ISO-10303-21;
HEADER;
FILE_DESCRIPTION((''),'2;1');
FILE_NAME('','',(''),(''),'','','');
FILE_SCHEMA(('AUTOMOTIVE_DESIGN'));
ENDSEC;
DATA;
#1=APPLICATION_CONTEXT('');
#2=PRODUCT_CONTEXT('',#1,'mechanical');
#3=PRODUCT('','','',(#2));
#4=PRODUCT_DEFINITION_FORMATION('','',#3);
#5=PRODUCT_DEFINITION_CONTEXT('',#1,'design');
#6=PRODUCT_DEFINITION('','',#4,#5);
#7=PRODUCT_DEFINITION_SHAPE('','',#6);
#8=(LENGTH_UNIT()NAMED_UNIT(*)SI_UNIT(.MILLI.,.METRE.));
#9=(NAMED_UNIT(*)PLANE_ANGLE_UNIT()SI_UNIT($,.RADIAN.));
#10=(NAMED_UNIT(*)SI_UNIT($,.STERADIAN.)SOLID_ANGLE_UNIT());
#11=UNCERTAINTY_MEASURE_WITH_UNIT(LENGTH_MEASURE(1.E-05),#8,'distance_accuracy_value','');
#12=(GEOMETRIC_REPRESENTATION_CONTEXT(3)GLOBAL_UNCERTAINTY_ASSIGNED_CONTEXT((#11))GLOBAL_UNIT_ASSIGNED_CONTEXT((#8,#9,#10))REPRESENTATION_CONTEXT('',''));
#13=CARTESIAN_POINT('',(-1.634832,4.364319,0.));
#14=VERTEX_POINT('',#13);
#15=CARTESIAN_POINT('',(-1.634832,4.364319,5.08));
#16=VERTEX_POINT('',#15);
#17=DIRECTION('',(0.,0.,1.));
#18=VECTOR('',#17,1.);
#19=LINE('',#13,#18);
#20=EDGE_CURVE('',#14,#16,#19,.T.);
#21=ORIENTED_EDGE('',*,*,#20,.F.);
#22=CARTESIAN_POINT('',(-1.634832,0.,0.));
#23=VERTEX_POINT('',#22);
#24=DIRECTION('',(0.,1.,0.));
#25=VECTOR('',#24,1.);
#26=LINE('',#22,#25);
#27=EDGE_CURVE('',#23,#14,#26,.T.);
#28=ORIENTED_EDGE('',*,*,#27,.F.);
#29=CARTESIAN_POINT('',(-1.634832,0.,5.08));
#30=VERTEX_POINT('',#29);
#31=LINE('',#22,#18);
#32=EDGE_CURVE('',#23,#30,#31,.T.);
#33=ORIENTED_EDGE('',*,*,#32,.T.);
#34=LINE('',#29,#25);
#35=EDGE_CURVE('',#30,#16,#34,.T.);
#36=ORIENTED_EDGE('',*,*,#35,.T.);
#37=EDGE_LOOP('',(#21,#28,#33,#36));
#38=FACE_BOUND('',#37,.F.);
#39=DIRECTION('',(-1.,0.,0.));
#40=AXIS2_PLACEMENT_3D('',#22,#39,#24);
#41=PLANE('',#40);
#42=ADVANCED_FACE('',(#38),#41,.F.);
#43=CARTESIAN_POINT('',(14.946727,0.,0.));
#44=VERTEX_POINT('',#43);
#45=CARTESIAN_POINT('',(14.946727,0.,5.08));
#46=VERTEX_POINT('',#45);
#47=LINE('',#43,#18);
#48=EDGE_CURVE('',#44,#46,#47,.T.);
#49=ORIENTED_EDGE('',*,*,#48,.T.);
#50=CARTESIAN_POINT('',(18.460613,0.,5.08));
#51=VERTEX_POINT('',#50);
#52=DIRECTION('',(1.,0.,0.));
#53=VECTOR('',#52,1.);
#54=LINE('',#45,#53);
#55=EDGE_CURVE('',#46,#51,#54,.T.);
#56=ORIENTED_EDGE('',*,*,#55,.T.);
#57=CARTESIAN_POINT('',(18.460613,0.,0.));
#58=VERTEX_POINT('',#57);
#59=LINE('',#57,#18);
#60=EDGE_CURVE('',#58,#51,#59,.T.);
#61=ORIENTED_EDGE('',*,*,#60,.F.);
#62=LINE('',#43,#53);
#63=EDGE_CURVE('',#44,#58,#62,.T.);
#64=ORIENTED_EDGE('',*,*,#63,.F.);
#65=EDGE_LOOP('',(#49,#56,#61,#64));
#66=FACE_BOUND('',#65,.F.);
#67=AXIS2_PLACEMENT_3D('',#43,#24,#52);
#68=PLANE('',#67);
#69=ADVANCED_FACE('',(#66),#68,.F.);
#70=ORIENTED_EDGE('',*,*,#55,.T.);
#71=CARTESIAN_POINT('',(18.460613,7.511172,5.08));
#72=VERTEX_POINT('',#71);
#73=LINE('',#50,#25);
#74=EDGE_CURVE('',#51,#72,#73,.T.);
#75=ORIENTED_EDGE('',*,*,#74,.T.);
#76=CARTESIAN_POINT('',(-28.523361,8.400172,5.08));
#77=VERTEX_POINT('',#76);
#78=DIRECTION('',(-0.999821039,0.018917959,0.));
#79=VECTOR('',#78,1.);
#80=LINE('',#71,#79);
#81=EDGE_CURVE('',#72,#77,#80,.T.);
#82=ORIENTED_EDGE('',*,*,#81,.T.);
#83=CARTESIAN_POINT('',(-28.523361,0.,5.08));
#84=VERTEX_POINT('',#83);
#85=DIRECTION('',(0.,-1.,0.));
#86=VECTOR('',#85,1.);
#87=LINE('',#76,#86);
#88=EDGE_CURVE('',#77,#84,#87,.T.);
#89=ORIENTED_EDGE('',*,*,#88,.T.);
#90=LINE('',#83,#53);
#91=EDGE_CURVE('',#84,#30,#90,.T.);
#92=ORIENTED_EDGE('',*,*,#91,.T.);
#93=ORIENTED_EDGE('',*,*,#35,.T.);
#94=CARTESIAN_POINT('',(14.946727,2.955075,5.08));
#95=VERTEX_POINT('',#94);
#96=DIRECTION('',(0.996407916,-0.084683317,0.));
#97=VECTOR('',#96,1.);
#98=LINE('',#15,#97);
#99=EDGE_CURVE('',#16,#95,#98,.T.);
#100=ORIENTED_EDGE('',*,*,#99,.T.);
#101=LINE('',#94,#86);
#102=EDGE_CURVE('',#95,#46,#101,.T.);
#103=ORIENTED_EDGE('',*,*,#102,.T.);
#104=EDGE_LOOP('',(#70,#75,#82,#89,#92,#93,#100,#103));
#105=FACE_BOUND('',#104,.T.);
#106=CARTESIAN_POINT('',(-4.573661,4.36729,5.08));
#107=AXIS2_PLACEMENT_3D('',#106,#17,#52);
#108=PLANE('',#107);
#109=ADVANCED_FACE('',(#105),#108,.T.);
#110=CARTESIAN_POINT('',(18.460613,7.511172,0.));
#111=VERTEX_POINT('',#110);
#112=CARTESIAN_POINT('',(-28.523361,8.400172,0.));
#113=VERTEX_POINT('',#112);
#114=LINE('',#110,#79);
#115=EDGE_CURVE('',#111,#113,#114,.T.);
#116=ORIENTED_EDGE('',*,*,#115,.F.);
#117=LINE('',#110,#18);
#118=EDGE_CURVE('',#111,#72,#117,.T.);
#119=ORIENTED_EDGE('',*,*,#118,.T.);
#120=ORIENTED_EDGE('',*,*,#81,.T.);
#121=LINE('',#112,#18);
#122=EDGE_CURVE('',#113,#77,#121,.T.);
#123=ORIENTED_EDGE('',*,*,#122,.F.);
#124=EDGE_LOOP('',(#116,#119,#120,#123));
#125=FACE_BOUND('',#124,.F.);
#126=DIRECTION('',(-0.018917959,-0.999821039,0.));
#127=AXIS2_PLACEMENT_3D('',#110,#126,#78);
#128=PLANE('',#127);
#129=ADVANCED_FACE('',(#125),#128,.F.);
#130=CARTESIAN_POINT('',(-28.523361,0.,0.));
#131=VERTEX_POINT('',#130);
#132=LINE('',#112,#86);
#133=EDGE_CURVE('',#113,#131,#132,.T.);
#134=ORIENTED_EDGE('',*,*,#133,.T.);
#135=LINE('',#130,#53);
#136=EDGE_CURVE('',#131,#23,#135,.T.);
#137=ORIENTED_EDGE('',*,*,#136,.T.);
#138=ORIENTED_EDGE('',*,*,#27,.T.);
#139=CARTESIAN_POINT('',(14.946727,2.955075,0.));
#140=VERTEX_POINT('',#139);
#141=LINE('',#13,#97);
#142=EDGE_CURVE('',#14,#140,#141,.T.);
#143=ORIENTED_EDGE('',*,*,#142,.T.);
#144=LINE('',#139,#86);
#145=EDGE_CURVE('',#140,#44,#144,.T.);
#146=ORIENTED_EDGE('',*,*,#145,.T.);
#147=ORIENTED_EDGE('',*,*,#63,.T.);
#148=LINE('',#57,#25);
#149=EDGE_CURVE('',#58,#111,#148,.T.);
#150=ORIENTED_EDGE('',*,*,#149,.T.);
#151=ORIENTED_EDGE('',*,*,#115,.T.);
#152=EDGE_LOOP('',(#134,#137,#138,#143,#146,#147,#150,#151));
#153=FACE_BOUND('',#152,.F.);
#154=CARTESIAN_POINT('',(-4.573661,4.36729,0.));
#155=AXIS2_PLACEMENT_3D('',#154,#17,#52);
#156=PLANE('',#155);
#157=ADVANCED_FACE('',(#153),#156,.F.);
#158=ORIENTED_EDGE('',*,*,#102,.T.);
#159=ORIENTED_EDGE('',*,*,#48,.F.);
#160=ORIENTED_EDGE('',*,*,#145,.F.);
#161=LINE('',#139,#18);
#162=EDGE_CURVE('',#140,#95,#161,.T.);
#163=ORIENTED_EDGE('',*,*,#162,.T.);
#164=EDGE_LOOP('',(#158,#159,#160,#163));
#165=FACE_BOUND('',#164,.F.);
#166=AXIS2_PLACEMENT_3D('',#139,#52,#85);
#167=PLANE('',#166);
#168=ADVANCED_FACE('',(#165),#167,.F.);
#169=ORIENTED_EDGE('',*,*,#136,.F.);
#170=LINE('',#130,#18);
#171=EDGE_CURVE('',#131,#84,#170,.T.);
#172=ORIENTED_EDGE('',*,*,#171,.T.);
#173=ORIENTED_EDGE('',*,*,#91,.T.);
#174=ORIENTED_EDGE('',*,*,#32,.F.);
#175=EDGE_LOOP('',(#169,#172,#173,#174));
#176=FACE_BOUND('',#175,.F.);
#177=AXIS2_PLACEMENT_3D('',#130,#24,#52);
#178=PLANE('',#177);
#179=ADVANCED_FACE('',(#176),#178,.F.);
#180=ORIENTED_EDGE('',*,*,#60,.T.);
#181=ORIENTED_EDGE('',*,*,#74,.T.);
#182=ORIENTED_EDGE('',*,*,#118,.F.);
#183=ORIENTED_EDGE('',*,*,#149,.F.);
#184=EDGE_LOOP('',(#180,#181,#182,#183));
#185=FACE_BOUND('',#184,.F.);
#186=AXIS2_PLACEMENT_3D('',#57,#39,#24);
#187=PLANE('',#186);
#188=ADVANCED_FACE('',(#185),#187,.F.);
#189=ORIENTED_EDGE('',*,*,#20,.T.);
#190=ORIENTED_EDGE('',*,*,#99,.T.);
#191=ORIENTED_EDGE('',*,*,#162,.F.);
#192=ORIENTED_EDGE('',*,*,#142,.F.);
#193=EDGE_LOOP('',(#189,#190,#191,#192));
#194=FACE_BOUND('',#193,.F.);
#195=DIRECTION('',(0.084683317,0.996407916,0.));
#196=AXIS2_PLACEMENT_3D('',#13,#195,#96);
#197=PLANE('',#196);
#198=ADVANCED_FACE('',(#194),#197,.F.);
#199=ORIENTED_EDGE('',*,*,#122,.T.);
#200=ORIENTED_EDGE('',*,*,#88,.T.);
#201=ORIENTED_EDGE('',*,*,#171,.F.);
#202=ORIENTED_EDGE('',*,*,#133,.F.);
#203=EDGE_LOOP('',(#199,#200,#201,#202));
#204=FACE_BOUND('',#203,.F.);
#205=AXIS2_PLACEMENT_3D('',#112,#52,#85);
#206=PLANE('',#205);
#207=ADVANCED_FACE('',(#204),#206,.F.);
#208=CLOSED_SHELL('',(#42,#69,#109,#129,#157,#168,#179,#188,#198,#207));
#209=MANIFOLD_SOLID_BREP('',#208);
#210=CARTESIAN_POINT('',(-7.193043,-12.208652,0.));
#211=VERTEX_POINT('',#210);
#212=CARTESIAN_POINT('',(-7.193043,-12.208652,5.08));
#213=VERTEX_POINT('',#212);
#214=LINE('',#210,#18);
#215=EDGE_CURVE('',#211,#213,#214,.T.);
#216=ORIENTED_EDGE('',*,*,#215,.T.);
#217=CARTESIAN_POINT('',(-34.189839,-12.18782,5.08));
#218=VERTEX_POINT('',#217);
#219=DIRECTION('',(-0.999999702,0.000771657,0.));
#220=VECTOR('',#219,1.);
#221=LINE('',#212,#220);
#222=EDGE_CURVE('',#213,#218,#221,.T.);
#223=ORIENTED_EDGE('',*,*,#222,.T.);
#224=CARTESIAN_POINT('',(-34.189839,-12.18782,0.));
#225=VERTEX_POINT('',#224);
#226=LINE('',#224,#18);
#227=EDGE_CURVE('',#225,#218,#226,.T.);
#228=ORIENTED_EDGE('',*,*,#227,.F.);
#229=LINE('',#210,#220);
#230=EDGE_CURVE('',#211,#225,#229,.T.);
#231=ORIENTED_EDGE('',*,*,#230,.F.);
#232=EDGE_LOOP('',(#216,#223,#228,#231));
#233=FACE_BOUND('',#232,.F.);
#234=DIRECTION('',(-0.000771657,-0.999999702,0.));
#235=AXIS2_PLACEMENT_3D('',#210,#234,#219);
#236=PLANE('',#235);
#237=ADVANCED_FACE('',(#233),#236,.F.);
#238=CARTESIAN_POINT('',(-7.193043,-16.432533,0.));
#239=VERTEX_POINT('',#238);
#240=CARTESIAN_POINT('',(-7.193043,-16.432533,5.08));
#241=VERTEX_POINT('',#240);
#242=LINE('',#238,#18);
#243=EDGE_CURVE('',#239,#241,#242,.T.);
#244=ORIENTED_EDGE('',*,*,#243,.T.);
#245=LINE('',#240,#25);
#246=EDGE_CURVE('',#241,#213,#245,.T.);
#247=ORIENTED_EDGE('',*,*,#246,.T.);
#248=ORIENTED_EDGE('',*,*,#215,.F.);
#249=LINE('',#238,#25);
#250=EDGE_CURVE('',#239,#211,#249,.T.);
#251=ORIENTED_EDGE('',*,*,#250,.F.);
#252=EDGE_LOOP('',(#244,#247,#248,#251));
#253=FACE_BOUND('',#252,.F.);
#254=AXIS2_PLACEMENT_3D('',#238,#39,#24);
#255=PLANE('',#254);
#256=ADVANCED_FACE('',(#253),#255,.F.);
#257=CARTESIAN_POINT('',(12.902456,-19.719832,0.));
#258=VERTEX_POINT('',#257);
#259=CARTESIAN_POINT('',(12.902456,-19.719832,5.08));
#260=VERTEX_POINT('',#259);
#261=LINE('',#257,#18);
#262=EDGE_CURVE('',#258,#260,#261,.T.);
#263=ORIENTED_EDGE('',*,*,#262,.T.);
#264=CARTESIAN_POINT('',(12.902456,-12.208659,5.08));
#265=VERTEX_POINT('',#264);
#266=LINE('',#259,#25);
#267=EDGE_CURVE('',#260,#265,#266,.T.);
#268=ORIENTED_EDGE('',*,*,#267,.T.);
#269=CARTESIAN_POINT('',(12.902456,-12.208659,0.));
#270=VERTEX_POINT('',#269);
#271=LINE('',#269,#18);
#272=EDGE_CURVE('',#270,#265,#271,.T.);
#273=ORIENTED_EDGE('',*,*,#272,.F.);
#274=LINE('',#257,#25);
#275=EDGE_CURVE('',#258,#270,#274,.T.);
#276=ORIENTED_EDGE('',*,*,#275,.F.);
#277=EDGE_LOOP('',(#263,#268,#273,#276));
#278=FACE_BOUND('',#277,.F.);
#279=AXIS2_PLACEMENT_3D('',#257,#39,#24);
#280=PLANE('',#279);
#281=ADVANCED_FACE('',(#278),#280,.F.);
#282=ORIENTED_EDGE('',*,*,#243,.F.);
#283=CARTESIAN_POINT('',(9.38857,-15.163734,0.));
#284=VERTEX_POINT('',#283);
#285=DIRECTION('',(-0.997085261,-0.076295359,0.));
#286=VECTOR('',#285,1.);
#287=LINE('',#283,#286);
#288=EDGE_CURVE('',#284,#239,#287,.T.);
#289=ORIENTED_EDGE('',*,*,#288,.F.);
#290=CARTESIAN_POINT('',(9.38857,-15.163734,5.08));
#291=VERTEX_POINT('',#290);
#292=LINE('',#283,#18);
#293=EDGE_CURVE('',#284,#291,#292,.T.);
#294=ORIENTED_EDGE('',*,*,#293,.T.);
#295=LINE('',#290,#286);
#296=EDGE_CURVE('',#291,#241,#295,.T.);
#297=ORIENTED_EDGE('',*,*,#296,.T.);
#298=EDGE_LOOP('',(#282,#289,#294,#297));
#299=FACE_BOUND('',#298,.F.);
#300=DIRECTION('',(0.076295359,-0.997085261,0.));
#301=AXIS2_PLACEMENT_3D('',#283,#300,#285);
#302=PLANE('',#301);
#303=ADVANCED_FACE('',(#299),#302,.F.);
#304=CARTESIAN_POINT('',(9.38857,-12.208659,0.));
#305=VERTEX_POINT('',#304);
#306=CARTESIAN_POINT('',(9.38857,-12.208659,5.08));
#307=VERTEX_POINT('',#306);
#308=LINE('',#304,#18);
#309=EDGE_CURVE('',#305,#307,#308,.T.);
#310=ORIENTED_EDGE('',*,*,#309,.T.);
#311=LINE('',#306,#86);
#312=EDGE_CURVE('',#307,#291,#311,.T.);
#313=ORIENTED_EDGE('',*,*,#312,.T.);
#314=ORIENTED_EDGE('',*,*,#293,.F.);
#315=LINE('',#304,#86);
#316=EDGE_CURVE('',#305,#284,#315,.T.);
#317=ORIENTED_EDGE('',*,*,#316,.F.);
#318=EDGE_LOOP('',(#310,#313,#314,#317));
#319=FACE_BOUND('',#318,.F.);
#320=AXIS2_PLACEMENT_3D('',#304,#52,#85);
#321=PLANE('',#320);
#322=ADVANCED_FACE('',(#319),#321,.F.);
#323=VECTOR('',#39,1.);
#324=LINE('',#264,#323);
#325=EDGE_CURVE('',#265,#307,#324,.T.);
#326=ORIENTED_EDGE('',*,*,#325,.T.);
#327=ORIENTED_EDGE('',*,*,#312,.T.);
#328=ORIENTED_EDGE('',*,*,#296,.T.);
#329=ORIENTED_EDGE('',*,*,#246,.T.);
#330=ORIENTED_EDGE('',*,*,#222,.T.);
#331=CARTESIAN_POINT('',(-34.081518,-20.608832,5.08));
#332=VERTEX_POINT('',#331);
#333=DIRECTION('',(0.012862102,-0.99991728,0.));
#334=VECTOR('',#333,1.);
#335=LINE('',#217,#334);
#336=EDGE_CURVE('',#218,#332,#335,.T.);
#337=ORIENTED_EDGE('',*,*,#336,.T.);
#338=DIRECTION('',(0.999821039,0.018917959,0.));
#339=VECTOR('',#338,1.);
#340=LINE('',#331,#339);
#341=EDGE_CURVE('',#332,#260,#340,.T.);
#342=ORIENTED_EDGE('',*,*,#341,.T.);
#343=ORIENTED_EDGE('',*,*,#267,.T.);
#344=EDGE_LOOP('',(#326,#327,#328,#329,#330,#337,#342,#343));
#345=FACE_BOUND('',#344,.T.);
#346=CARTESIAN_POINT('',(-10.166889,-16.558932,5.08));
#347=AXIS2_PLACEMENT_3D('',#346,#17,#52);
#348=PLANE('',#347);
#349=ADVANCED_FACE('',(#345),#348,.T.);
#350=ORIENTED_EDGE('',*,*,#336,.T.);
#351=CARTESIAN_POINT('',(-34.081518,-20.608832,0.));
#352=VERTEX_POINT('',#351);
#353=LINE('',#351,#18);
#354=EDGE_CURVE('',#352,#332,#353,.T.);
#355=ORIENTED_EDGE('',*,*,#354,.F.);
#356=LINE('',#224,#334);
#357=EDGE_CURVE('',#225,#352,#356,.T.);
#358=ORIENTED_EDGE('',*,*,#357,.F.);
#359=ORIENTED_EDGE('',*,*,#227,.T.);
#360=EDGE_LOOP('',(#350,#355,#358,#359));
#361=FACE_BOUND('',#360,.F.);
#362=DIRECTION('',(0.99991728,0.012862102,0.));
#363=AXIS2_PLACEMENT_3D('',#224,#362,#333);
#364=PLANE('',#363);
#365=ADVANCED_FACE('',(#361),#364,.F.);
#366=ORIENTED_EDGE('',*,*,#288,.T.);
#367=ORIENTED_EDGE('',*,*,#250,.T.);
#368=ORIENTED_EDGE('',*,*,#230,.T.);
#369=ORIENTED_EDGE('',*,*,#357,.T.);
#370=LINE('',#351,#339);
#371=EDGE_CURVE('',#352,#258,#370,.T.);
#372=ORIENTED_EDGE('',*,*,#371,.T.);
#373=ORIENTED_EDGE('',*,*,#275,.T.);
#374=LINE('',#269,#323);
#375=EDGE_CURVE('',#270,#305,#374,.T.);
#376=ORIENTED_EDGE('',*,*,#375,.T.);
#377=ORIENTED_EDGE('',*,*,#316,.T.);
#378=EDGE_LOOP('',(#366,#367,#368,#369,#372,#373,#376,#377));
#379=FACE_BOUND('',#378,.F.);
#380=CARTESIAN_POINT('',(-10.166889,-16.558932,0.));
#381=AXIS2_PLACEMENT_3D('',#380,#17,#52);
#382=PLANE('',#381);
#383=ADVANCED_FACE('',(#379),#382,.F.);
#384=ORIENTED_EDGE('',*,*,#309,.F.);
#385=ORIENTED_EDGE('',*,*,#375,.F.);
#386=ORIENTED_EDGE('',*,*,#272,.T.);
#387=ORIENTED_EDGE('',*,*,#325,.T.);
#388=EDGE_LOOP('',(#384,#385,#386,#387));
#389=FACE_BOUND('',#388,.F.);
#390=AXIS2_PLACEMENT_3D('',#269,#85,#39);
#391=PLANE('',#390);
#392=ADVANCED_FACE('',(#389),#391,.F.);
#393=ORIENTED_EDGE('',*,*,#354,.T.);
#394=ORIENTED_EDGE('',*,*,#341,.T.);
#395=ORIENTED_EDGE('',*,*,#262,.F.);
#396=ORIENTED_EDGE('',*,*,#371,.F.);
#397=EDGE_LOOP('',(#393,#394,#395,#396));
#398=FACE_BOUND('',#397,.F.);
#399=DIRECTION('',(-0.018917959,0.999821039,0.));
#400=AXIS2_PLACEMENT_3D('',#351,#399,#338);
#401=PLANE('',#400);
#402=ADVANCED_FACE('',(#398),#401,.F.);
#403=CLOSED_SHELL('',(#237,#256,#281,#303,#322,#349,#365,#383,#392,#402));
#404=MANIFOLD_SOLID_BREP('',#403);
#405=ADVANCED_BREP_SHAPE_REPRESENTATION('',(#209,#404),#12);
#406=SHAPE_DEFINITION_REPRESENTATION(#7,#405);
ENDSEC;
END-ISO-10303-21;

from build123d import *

# Parameters (mm, degrees)
F1_DEPTH = 5.08
F3_DEPTH = 5.08


# Not quite as in the source:
# - ends of sketch curves that miss each other by under 0.0002 mm in the source are joined


with BuildPart() as f1:
    # F0 (on Top) → F1 (new body)
    with BuildSketch(Plane.XY):
        Polygon((18.4606127441, 0), (18.4606127441, 7.51117242), (-28.5233613104, 8.40017242), (-28.5233613104, 0), (-1.6348321224, 0), (-1.6348321224, 4.1214697994), (-1.6348321224, 4.36431868), (14.9467270821, 2.9550751206), (14.9467270821, 0), align=None)
    extrude(amount=F1_DEPTH)


with BuildPart() as f3:
    # F2 (on Top) → F3 (new body)
    with BuildSketch(Plane.XY):
        Polygon((-7.1930428014, -16.4325327125), (-7.1930428014, -12.2086521793), (-34.1898388486, -12.1878198983), (-34.0815179727, -20.6088316595), (12.9024560817, -19.7198316595), (12.9024560817, -12.2086592395), (9.3885704198, -12.2086592395), (9.3885704198, -15.16373436), align=None)
    extrude(amount=F3_DEPTH)


solid = Compound([f1.part, f3.part])
